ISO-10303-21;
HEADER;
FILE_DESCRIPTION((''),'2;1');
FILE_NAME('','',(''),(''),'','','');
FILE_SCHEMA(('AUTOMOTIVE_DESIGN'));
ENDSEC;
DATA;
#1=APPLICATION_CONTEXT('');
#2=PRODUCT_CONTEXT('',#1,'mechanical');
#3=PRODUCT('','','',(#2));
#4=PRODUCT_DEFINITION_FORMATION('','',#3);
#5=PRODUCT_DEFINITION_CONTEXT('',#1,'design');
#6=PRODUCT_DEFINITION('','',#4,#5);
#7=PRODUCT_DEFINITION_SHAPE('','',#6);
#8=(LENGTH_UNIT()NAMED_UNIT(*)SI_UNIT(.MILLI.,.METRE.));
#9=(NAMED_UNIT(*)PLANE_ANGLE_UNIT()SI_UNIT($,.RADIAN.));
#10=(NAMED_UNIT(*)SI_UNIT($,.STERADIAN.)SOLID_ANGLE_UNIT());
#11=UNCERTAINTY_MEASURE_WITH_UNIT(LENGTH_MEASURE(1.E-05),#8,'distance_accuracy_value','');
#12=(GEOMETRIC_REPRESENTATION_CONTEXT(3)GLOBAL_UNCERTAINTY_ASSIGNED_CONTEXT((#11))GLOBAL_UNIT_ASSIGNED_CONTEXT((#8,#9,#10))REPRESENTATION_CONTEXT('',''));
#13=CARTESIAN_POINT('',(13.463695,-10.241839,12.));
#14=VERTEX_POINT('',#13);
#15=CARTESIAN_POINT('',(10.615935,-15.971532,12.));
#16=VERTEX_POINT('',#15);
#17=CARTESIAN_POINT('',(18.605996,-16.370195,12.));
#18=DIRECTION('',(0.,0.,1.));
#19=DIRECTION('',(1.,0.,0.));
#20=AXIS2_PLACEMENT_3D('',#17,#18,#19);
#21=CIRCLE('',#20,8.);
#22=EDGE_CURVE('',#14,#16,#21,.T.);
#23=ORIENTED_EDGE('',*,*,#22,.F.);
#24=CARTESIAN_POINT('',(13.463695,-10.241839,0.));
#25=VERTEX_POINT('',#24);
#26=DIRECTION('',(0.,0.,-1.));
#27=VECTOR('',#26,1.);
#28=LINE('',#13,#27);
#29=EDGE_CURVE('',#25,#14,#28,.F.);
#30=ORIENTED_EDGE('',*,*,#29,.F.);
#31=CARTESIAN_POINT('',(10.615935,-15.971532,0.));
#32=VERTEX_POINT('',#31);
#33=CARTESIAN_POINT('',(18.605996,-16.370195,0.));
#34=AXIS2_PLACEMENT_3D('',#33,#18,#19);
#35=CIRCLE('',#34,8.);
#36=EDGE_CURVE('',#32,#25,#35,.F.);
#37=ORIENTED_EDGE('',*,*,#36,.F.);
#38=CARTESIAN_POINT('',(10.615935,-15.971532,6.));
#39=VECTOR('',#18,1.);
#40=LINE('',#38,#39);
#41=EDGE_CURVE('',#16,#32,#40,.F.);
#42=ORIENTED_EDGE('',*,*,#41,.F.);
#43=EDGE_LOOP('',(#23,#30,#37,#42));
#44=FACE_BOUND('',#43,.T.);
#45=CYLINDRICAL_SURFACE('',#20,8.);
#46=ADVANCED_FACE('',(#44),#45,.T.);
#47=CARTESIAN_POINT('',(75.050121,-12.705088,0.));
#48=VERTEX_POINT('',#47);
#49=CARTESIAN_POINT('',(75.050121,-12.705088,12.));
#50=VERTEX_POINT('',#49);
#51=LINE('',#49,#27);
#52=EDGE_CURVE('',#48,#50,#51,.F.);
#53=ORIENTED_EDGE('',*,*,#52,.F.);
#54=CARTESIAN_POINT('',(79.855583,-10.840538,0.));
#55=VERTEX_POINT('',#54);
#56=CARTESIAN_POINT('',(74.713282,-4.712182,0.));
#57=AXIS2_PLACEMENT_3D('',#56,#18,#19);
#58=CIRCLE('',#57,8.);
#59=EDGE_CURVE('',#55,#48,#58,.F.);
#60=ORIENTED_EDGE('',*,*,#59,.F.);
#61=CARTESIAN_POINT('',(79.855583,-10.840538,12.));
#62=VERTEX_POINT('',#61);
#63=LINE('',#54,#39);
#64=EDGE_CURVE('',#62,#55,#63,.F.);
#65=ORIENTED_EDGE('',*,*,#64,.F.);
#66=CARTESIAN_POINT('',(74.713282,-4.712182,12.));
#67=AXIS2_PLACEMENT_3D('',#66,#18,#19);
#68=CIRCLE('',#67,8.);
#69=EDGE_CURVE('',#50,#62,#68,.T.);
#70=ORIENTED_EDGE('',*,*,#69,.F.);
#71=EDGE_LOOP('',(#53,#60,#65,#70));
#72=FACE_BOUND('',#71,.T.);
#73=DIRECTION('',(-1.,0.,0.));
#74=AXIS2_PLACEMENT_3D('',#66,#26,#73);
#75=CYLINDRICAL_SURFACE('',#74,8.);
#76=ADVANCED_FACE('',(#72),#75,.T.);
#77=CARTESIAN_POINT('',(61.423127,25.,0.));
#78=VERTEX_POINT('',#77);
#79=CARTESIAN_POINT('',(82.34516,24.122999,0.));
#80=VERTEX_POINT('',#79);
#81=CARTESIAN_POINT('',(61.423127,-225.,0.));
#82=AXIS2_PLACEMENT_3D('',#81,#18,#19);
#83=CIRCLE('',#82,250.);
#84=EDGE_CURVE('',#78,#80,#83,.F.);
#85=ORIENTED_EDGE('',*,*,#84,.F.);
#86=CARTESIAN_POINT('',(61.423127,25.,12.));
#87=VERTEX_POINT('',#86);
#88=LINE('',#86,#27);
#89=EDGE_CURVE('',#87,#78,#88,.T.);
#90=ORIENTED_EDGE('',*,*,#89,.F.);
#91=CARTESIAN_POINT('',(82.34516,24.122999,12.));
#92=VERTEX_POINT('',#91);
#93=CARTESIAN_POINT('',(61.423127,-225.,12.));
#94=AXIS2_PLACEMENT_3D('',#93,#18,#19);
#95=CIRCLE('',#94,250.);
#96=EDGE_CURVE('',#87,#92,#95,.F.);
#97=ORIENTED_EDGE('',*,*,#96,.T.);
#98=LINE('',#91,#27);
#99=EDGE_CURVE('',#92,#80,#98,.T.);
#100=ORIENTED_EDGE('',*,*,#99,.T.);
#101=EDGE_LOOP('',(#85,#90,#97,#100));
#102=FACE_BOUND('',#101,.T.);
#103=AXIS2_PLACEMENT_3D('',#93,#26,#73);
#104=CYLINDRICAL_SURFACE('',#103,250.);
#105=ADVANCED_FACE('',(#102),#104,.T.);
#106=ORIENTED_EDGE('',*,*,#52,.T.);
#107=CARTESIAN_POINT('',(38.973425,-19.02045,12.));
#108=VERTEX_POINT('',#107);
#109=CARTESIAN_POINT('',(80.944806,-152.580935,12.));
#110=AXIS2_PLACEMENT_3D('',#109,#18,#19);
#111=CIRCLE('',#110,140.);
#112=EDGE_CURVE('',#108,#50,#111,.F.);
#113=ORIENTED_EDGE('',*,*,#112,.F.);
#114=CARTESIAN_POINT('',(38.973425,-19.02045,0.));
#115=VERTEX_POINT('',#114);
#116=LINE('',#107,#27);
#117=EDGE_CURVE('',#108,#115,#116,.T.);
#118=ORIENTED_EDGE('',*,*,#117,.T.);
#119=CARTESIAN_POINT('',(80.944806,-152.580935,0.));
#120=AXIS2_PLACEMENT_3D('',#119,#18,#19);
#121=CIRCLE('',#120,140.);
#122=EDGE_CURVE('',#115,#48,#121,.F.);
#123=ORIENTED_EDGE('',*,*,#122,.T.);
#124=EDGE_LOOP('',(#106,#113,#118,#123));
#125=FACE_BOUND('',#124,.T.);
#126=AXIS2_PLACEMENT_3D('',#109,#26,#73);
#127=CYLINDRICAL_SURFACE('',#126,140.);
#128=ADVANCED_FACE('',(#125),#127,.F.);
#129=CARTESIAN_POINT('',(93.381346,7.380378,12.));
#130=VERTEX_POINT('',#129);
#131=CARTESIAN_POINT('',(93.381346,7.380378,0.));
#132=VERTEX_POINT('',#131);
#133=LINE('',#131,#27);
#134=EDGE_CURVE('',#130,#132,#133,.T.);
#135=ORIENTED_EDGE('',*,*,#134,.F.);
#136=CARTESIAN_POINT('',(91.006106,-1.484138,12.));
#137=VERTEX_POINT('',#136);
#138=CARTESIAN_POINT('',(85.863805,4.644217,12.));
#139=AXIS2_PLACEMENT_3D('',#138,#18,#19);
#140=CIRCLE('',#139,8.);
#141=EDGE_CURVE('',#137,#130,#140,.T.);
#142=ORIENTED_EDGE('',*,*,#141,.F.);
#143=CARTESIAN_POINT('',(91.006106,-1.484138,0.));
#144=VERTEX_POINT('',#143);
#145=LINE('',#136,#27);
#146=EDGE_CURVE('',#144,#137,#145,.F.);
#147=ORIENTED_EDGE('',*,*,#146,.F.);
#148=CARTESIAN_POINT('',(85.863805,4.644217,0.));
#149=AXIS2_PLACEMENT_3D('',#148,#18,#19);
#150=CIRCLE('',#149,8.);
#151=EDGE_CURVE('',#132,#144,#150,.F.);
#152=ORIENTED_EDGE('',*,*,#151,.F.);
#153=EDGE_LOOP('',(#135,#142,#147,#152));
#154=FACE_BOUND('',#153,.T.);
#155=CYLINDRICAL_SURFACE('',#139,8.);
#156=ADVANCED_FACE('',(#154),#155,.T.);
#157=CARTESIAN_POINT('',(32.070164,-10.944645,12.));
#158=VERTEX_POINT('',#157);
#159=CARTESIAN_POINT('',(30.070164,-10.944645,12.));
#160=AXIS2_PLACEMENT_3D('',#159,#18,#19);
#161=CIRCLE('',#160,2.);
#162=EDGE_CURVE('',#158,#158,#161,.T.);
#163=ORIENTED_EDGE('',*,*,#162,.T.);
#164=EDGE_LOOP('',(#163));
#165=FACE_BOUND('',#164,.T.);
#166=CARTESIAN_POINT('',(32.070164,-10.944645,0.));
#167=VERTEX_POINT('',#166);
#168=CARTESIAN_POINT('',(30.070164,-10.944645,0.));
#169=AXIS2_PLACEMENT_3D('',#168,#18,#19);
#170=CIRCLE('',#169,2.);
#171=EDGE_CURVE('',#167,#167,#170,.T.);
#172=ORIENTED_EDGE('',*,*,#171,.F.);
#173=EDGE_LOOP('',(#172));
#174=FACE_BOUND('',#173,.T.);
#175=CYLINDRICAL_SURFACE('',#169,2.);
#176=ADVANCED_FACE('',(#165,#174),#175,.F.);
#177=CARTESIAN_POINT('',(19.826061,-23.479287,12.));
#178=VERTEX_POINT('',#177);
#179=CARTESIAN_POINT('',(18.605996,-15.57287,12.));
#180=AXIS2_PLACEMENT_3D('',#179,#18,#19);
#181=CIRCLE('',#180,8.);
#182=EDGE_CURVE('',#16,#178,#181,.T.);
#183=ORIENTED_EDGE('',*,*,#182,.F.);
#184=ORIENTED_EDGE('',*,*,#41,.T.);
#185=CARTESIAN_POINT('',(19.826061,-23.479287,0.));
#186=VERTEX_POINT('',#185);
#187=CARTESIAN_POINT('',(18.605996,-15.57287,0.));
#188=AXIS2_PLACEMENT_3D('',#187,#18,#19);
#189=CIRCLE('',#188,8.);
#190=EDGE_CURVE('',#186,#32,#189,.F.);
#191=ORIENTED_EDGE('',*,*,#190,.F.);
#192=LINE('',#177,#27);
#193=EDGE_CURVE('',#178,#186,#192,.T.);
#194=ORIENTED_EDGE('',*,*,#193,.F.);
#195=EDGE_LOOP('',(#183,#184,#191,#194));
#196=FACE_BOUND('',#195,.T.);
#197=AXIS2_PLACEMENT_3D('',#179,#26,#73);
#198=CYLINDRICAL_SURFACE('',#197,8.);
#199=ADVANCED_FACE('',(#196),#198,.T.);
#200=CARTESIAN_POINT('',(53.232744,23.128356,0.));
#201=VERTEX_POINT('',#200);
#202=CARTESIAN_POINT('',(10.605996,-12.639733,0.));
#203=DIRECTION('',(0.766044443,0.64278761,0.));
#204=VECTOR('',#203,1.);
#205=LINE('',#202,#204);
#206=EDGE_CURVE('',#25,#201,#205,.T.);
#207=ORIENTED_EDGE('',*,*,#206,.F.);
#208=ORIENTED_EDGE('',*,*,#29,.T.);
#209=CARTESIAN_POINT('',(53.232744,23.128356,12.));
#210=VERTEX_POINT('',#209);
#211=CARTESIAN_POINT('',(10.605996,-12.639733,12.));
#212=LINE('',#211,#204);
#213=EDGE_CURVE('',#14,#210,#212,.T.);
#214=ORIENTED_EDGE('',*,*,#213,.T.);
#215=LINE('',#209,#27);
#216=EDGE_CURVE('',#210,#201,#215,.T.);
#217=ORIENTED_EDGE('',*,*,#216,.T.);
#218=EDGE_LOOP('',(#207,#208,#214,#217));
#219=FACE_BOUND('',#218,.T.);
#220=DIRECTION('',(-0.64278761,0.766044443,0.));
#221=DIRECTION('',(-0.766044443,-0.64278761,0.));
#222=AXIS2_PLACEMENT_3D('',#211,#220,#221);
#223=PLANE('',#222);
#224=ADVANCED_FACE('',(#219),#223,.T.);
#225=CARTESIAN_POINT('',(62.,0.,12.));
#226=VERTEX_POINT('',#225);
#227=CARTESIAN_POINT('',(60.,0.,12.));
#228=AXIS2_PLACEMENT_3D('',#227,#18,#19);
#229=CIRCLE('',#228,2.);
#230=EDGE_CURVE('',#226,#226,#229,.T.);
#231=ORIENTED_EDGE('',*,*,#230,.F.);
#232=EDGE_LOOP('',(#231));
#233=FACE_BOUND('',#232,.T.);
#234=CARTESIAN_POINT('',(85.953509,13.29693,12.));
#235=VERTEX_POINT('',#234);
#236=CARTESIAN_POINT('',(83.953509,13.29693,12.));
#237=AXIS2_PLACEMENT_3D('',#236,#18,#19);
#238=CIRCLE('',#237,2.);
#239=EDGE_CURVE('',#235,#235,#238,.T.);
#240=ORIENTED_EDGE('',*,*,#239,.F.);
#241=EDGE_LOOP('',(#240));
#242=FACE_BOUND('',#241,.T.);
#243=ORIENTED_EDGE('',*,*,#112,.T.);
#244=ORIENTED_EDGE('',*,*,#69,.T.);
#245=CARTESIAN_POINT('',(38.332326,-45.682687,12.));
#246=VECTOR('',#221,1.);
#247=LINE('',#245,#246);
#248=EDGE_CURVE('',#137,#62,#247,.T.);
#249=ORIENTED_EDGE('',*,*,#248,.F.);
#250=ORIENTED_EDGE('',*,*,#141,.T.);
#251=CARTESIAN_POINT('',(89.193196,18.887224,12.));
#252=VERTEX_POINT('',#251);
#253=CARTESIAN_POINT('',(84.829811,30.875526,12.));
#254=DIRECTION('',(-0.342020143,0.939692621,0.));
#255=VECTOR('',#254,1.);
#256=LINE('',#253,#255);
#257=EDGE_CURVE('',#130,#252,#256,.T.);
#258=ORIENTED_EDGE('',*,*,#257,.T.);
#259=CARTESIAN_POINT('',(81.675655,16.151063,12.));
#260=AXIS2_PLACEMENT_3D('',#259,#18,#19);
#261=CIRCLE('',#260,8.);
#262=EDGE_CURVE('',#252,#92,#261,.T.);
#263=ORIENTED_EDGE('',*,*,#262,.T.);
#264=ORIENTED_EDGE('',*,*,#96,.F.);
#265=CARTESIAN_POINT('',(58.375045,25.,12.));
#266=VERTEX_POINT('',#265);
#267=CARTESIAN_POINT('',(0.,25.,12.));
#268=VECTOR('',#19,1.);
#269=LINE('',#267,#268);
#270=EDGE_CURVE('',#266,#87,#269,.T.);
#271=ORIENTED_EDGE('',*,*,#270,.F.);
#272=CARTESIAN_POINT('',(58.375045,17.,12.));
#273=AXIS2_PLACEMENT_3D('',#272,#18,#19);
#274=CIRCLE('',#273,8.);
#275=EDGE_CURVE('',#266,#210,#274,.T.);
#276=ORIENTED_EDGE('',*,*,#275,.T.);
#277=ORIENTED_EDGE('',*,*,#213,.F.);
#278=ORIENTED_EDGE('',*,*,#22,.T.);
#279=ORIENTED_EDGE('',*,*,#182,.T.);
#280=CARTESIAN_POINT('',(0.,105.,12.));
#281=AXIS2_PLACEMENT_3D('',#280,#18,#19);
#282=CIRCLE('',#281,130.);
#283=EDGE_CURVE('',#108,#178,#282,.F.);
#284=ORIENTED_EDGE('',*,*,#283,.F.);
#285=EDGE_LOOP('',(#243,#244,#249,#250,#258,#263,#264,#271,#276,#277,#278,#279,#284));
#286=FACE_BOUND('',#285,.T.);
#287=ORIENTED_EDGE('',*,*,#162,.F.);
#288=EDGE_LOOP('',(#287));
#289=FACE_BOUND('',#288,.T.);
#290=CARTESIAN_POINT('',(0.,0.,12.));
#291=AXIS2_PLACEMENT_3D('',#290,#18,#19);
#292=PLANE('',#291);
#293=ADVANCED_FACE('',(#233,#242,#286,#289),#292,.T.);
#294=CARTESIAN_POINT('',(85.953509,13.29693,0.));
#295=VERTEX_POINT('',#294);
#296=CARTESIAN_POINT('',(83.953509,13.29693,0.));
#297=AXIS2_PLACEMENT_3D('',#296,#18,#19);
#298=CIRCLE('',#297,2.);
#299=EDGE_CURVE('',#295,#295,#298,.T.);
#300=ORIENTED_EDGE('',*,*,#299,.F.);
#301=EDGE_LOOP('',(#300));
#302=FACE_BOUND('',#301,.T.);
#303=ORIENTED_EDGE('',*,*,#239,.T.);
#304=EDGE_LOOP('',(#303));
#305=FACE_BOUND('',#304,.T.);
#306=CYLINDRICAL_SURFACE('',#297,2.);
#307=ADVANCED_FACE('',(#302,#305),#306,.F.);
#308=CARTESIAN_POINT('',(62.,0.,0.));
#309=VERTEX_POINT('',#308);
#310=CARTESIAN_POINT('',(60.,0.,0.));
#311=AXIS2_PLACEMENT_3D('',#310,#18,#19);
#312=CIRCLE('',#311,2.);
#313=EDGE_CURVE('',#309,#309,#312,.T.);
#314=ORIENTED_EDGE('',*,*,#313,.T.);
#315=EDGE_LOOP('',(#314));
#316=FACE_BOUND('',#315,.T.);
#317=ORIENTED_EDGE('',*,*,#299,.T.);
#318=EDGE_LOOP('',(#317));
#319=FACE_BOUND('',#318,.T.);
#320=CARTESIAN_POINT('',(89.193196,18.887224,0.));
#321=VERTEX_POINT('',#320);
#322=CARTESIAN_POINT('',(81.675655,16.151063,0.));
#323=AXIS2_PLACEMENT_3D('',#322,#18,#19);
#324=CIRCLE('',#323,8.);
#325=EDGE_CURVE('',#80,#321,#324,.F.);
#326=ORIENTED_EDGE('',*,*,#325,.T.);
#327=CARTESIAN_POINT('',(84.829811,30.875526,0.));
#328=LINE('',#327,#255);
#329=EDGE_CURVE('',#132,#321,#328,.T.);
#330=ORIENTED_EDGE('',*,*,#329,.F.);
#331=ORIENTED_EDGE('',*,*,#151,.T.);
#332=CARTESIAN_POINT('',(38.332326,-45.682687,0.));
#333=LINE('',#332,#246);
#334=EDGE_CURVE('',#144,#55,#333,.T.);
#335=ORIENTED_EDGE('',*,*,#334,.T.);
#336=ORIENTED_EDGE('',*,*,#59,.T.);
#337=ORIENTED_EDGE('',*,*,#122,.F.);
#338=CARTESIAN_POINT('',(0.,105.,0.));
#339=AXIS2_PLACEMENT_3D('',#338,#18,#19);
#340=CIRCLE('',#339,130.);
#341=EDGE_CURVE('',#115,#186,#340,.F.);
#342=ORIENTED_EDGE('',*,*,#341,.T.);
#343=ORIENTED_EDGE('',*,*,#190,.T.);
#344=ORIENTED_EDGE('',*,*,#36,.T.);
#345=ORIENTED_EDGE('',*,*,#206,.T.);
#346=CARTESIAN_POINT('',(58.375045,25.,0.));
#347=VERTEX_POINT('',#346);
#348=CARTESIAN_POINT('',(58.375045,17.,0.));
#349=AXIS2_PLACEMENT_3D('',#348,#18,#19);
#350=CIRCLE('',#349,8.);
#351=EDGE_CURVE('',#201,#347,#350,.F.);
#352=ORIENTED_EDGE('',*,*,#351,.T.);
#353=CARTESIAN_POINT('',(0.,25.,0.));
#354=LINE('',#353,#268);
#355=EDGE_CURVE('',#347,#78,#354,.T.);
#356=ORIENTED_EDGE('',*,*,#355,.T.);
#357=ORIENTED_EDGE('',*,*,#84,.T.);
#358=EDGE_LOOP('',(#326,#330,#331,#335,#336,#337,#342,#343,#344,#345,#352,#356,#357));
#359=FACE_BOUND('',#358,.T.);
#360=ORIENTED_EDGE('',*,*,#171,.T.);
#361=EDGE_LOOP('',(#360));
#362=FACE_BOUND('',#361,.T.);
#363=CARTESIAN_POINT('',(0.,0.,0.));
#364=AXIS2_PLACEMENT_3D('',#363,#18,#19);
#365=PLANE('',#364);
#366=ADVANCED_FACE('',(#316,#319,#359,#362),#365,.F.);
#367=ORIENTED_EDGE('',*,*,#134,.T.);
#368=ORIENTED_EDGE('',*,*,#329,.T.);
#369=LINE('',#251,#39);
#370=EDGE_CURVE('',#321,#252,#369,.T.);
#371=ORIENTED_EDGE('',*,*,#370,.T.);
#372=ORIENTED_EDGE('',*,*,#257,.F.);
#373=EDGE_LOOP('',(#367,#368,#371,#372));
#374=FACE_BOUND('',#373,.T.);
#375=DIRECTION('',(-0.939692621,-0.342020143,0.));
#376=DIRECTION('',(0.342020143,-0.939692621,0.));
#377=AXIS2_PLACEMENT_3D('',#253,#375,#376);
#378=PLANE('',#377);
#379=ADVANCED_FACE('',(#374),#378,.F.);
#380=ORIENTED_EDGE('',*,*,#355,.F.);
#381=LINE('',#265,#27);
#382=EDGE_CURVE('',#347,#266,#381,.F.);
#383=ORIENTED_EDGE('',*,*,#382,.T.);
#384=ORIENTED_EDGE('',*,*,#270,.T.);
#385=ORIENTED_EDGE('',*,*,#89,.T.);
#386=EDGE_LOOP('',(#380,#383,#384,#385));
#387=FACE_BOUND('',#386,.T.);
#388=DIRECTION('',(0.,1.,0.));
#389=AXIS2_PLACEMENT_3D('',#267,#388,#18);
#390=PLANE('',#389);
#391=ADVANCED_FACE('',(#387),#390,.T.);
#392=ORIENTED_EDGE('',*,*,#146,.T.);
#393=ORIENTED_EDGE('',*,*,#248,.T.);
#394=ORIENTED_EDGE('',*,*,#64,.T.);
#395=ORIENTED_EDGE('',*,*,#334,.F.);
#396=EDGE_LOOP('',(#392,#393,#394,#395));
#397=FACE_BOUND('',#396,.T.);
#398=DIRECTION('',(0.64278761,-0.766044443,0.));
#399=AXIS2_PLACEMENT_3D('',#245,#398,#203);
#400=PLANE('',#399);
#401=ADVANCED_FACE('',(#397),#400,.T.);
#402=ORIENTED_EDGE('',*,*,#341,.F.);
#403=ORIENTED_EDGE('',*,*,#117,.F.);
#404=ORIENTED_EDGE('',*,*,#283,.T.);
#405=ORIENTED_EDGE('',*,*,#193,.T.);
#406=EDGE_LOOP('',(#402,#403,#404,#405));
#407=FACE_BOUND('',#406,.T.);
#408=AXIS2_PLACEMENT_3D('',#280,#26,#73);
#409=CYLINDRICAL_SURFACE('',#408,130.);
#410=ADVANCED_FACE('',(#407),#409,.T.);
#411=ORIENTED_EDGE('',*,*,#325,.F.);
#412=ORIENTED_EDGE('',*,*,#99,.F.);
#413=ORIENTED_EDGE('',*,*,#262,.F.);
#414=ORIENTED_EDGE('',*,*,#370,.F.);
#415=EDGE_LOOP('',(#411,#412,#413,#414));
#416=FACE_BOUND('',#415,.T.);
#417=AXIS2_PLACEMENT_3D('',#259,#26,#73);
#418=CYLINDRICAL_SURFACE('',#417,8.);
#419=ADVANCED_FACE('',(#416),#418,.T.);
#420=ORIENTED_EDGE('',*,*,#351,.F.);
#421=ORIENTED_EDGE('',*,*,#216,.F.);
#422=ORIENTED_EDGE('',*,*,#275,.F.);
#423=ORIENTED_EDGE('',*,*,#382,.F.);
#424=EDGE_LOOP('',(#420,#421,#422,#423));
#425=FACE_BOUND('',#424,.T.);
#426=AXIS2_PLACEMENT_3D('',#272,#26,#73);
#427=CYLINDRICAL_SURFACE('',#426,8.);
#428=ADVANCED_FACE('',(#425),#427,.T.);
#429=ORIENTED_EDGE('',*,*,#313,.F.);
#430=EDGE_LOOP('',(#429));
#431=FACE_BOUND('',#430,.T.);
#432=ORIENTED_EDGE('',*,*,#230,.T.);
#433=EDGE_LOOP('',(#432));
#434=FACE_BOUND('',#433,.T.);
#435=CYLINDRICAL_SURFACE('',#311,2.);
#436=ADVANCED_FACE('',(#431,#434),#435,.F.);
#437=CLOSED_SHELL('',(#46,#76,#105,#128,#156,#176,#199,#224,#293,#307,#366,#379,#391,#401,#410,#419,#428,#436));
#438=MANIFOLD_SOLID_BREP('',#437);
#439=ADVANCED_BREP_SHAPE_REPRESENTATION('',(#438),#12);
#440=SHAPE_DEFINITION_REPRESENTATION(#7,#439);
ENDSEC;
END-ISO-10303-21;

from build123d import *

# Parameters (mm, degrees)
BOSS_EXTRUDE1_DEPTH = 12
SKETCH4_R           = 2
CUT_EXTRUDE2_DEPTH  = 100.249994256
FILLET2_R           = 8


with BuildPart() as part:
    # Sketch1 → Boss-Extrude1 (new body)
    with BuildSketch(Plane.XY):
        with BuildLine():
            Line((61.423127431, 25), (55.463282958, 25))
            Line((55.463282958, 25), (10.60599556, -12.639733311))
            Line((10.60599556, -12.639733311), (10.60599556, -24.566634818))
            ThreePointArc((10.60599556, -24.566634818), (24.944333721, -22.584404279), (38.973425347, -19.020450397))
            ThreePointArc((38.973425347, -19.020450397), (58.129824232, -14.452456897), (77.737673628, -12.617674908))
            Line((77.737673628, -12.617674908), (95.297226402, 2.116539348))
            Line((95.297226402, 2.116539348), (87.463282958, 23.640122064))
            ThreePointArc((87.463282958, 23.640122064), (74.460947109, 24.659799043), (61.423127431, 25))
        make_face()
    extrude(amount=BOSS_EXTRUDE1_DEPTH)

    # Sketch4 → Cut-Extrude2 (cut, through all)
    with BuildSketch(Plane.XY.offset(12)):
        with Locations((30.070163865, -10.944644586)):
            Circle(SKETCH4_R)
        with Locations((83.953508951, 13.296929528)):
            Circle(SKETCH4_R)
        with Locations((60, 0)):
            Circle(SKETCH4_R)
    extrude(amount=-CUT_EXTRUDE2_DEPTH, mode=Mode.SUBTRACT)

    # Fillet2
    # the kernel refuses this fillet: 8 mm, written as the material it takes off along each edge
    with BuildSketch(Plane(origin=(77.737673628, -12.617674908, -6.911835491), x_dir=(0.7660444431189745, 0.6427876096865436, 0), z_dir=(0, 0, 1))) as fillet2_piece_1:
        with BuildLine():
            CenterArc((2.764734197, 8), FILLET2_R, 232.413146156, 37.586853844)
            ThreePointArc((-2.114972699, 1.660563068), (-1.053499463, 0.835359424), (0, 0))
            Line((0, 0), (2.764734197, 0))
        make_face()
    extrude(amount=25.823670983, mode=Mode.SUBTRACT)
    with BuildSketch(Plane(origin=(10.60599556, -24.566634818, -23.209901988), x_dir=(0, 1, 0), z_dir=(0, 0, 1))) as fillet2_piece_2:
        with BuildLine():
            CenterArc((8.993765029, -8), FILLET2_R, 90, 98.772306206)
            ThreePointArc((1.087347338, -9.220065283), (0.461340951, -4.619742362), (0, 0))
            Line((0, 0), (8.993765029, 0))
        make_face()
    extrude(amount=58.419803977, mode=Mode.SUBTRACT)
    with BuildSketch(Plane(origin=(10.60599556, -12.639733311, -9.326153163), x_dir=(0.7660444431189766, 0.6427876096865411, 0), z_dir=(0, 0, 1))) as fillet2_piece_3:
        with BuildLine():
            CenterArc((FILLET2_R * 0.466307658155, -FILLET2_R), FILLET2_R, 90, 50)
            Line((-FILLET2_R * 0.299736784964, -FILLET2_R * 0.357212390313), (0, 0))
            Line((0, 0), (FILLET2_R * 0.466307658155, 0))
        make_face()
    extrude(amount=30.652306326, mode=Mode.SUBTRACT)
    with BuildSketch(Plane(origin=(95.297226402, 2.116539348, -14.004150764), x_dir=(-0.34202014332566766, 0.9396926207859088, 0), z_dir=(0, 0, 1))) as fillet2_piece_4:
        with BuildLine():
            CenterArc((FILLET2_R * 0.70020753821, FILLET2_R), FILLET2_R, 200, 70)
            Line((-FILLET2_R * 0.239485082576, FILLET2_R * 0.657979856674), (0, 0))
            Line((0, 0), (FILLET2_R * 0.70020753821, 0))
        make_face()
    extrude(amount=40.008301528, mode=Mode.SUBTRACT)
    with BuildSketch(Plane(origin=(87.463282958, 23.640122064, -12.852127182), x_dir=(-0.9955788661369174, 0.0939293420690782, 0), z_dir=(0, 0, 1))) as fillet2_piece_5:
        with BuildLine():
            CenterArc((5.058597259, 7.999577135), FILLET2_R, 205.389700078, 65.199408418)
            Line((-2.168701836, 4.569395246), (0, 0))
            ThreePointArc((0, 0), (2.570425436, -0.013214523), (5.140850873, 0))
        make_face()
    extrude(amount=37.704254365, mode=Mode.SUBTRACT)
    with BuildSketch(Plane(origin=(55.463282958, 25, -7.279404685), x_dir=(1, 0, 0), z_dir=(0, 0, 1))) as fillet2_piece_6:
        with BuildLine():
            CenterArc((FILLET2_R * 0.363970234266, -FILLET2_R), FILLET2_R, 90, 40)
            Line((-FILLET2_R * 0.27881737542, -FILLET2_R * 0.233955556881), (0, 0))
            Line((0, 0), (FILLET2_R * 0.363970234266, 0))
        make_face()
    extrude(amount=26.558809371, mode=Mode.SUBTRACT)


solid = part.part
